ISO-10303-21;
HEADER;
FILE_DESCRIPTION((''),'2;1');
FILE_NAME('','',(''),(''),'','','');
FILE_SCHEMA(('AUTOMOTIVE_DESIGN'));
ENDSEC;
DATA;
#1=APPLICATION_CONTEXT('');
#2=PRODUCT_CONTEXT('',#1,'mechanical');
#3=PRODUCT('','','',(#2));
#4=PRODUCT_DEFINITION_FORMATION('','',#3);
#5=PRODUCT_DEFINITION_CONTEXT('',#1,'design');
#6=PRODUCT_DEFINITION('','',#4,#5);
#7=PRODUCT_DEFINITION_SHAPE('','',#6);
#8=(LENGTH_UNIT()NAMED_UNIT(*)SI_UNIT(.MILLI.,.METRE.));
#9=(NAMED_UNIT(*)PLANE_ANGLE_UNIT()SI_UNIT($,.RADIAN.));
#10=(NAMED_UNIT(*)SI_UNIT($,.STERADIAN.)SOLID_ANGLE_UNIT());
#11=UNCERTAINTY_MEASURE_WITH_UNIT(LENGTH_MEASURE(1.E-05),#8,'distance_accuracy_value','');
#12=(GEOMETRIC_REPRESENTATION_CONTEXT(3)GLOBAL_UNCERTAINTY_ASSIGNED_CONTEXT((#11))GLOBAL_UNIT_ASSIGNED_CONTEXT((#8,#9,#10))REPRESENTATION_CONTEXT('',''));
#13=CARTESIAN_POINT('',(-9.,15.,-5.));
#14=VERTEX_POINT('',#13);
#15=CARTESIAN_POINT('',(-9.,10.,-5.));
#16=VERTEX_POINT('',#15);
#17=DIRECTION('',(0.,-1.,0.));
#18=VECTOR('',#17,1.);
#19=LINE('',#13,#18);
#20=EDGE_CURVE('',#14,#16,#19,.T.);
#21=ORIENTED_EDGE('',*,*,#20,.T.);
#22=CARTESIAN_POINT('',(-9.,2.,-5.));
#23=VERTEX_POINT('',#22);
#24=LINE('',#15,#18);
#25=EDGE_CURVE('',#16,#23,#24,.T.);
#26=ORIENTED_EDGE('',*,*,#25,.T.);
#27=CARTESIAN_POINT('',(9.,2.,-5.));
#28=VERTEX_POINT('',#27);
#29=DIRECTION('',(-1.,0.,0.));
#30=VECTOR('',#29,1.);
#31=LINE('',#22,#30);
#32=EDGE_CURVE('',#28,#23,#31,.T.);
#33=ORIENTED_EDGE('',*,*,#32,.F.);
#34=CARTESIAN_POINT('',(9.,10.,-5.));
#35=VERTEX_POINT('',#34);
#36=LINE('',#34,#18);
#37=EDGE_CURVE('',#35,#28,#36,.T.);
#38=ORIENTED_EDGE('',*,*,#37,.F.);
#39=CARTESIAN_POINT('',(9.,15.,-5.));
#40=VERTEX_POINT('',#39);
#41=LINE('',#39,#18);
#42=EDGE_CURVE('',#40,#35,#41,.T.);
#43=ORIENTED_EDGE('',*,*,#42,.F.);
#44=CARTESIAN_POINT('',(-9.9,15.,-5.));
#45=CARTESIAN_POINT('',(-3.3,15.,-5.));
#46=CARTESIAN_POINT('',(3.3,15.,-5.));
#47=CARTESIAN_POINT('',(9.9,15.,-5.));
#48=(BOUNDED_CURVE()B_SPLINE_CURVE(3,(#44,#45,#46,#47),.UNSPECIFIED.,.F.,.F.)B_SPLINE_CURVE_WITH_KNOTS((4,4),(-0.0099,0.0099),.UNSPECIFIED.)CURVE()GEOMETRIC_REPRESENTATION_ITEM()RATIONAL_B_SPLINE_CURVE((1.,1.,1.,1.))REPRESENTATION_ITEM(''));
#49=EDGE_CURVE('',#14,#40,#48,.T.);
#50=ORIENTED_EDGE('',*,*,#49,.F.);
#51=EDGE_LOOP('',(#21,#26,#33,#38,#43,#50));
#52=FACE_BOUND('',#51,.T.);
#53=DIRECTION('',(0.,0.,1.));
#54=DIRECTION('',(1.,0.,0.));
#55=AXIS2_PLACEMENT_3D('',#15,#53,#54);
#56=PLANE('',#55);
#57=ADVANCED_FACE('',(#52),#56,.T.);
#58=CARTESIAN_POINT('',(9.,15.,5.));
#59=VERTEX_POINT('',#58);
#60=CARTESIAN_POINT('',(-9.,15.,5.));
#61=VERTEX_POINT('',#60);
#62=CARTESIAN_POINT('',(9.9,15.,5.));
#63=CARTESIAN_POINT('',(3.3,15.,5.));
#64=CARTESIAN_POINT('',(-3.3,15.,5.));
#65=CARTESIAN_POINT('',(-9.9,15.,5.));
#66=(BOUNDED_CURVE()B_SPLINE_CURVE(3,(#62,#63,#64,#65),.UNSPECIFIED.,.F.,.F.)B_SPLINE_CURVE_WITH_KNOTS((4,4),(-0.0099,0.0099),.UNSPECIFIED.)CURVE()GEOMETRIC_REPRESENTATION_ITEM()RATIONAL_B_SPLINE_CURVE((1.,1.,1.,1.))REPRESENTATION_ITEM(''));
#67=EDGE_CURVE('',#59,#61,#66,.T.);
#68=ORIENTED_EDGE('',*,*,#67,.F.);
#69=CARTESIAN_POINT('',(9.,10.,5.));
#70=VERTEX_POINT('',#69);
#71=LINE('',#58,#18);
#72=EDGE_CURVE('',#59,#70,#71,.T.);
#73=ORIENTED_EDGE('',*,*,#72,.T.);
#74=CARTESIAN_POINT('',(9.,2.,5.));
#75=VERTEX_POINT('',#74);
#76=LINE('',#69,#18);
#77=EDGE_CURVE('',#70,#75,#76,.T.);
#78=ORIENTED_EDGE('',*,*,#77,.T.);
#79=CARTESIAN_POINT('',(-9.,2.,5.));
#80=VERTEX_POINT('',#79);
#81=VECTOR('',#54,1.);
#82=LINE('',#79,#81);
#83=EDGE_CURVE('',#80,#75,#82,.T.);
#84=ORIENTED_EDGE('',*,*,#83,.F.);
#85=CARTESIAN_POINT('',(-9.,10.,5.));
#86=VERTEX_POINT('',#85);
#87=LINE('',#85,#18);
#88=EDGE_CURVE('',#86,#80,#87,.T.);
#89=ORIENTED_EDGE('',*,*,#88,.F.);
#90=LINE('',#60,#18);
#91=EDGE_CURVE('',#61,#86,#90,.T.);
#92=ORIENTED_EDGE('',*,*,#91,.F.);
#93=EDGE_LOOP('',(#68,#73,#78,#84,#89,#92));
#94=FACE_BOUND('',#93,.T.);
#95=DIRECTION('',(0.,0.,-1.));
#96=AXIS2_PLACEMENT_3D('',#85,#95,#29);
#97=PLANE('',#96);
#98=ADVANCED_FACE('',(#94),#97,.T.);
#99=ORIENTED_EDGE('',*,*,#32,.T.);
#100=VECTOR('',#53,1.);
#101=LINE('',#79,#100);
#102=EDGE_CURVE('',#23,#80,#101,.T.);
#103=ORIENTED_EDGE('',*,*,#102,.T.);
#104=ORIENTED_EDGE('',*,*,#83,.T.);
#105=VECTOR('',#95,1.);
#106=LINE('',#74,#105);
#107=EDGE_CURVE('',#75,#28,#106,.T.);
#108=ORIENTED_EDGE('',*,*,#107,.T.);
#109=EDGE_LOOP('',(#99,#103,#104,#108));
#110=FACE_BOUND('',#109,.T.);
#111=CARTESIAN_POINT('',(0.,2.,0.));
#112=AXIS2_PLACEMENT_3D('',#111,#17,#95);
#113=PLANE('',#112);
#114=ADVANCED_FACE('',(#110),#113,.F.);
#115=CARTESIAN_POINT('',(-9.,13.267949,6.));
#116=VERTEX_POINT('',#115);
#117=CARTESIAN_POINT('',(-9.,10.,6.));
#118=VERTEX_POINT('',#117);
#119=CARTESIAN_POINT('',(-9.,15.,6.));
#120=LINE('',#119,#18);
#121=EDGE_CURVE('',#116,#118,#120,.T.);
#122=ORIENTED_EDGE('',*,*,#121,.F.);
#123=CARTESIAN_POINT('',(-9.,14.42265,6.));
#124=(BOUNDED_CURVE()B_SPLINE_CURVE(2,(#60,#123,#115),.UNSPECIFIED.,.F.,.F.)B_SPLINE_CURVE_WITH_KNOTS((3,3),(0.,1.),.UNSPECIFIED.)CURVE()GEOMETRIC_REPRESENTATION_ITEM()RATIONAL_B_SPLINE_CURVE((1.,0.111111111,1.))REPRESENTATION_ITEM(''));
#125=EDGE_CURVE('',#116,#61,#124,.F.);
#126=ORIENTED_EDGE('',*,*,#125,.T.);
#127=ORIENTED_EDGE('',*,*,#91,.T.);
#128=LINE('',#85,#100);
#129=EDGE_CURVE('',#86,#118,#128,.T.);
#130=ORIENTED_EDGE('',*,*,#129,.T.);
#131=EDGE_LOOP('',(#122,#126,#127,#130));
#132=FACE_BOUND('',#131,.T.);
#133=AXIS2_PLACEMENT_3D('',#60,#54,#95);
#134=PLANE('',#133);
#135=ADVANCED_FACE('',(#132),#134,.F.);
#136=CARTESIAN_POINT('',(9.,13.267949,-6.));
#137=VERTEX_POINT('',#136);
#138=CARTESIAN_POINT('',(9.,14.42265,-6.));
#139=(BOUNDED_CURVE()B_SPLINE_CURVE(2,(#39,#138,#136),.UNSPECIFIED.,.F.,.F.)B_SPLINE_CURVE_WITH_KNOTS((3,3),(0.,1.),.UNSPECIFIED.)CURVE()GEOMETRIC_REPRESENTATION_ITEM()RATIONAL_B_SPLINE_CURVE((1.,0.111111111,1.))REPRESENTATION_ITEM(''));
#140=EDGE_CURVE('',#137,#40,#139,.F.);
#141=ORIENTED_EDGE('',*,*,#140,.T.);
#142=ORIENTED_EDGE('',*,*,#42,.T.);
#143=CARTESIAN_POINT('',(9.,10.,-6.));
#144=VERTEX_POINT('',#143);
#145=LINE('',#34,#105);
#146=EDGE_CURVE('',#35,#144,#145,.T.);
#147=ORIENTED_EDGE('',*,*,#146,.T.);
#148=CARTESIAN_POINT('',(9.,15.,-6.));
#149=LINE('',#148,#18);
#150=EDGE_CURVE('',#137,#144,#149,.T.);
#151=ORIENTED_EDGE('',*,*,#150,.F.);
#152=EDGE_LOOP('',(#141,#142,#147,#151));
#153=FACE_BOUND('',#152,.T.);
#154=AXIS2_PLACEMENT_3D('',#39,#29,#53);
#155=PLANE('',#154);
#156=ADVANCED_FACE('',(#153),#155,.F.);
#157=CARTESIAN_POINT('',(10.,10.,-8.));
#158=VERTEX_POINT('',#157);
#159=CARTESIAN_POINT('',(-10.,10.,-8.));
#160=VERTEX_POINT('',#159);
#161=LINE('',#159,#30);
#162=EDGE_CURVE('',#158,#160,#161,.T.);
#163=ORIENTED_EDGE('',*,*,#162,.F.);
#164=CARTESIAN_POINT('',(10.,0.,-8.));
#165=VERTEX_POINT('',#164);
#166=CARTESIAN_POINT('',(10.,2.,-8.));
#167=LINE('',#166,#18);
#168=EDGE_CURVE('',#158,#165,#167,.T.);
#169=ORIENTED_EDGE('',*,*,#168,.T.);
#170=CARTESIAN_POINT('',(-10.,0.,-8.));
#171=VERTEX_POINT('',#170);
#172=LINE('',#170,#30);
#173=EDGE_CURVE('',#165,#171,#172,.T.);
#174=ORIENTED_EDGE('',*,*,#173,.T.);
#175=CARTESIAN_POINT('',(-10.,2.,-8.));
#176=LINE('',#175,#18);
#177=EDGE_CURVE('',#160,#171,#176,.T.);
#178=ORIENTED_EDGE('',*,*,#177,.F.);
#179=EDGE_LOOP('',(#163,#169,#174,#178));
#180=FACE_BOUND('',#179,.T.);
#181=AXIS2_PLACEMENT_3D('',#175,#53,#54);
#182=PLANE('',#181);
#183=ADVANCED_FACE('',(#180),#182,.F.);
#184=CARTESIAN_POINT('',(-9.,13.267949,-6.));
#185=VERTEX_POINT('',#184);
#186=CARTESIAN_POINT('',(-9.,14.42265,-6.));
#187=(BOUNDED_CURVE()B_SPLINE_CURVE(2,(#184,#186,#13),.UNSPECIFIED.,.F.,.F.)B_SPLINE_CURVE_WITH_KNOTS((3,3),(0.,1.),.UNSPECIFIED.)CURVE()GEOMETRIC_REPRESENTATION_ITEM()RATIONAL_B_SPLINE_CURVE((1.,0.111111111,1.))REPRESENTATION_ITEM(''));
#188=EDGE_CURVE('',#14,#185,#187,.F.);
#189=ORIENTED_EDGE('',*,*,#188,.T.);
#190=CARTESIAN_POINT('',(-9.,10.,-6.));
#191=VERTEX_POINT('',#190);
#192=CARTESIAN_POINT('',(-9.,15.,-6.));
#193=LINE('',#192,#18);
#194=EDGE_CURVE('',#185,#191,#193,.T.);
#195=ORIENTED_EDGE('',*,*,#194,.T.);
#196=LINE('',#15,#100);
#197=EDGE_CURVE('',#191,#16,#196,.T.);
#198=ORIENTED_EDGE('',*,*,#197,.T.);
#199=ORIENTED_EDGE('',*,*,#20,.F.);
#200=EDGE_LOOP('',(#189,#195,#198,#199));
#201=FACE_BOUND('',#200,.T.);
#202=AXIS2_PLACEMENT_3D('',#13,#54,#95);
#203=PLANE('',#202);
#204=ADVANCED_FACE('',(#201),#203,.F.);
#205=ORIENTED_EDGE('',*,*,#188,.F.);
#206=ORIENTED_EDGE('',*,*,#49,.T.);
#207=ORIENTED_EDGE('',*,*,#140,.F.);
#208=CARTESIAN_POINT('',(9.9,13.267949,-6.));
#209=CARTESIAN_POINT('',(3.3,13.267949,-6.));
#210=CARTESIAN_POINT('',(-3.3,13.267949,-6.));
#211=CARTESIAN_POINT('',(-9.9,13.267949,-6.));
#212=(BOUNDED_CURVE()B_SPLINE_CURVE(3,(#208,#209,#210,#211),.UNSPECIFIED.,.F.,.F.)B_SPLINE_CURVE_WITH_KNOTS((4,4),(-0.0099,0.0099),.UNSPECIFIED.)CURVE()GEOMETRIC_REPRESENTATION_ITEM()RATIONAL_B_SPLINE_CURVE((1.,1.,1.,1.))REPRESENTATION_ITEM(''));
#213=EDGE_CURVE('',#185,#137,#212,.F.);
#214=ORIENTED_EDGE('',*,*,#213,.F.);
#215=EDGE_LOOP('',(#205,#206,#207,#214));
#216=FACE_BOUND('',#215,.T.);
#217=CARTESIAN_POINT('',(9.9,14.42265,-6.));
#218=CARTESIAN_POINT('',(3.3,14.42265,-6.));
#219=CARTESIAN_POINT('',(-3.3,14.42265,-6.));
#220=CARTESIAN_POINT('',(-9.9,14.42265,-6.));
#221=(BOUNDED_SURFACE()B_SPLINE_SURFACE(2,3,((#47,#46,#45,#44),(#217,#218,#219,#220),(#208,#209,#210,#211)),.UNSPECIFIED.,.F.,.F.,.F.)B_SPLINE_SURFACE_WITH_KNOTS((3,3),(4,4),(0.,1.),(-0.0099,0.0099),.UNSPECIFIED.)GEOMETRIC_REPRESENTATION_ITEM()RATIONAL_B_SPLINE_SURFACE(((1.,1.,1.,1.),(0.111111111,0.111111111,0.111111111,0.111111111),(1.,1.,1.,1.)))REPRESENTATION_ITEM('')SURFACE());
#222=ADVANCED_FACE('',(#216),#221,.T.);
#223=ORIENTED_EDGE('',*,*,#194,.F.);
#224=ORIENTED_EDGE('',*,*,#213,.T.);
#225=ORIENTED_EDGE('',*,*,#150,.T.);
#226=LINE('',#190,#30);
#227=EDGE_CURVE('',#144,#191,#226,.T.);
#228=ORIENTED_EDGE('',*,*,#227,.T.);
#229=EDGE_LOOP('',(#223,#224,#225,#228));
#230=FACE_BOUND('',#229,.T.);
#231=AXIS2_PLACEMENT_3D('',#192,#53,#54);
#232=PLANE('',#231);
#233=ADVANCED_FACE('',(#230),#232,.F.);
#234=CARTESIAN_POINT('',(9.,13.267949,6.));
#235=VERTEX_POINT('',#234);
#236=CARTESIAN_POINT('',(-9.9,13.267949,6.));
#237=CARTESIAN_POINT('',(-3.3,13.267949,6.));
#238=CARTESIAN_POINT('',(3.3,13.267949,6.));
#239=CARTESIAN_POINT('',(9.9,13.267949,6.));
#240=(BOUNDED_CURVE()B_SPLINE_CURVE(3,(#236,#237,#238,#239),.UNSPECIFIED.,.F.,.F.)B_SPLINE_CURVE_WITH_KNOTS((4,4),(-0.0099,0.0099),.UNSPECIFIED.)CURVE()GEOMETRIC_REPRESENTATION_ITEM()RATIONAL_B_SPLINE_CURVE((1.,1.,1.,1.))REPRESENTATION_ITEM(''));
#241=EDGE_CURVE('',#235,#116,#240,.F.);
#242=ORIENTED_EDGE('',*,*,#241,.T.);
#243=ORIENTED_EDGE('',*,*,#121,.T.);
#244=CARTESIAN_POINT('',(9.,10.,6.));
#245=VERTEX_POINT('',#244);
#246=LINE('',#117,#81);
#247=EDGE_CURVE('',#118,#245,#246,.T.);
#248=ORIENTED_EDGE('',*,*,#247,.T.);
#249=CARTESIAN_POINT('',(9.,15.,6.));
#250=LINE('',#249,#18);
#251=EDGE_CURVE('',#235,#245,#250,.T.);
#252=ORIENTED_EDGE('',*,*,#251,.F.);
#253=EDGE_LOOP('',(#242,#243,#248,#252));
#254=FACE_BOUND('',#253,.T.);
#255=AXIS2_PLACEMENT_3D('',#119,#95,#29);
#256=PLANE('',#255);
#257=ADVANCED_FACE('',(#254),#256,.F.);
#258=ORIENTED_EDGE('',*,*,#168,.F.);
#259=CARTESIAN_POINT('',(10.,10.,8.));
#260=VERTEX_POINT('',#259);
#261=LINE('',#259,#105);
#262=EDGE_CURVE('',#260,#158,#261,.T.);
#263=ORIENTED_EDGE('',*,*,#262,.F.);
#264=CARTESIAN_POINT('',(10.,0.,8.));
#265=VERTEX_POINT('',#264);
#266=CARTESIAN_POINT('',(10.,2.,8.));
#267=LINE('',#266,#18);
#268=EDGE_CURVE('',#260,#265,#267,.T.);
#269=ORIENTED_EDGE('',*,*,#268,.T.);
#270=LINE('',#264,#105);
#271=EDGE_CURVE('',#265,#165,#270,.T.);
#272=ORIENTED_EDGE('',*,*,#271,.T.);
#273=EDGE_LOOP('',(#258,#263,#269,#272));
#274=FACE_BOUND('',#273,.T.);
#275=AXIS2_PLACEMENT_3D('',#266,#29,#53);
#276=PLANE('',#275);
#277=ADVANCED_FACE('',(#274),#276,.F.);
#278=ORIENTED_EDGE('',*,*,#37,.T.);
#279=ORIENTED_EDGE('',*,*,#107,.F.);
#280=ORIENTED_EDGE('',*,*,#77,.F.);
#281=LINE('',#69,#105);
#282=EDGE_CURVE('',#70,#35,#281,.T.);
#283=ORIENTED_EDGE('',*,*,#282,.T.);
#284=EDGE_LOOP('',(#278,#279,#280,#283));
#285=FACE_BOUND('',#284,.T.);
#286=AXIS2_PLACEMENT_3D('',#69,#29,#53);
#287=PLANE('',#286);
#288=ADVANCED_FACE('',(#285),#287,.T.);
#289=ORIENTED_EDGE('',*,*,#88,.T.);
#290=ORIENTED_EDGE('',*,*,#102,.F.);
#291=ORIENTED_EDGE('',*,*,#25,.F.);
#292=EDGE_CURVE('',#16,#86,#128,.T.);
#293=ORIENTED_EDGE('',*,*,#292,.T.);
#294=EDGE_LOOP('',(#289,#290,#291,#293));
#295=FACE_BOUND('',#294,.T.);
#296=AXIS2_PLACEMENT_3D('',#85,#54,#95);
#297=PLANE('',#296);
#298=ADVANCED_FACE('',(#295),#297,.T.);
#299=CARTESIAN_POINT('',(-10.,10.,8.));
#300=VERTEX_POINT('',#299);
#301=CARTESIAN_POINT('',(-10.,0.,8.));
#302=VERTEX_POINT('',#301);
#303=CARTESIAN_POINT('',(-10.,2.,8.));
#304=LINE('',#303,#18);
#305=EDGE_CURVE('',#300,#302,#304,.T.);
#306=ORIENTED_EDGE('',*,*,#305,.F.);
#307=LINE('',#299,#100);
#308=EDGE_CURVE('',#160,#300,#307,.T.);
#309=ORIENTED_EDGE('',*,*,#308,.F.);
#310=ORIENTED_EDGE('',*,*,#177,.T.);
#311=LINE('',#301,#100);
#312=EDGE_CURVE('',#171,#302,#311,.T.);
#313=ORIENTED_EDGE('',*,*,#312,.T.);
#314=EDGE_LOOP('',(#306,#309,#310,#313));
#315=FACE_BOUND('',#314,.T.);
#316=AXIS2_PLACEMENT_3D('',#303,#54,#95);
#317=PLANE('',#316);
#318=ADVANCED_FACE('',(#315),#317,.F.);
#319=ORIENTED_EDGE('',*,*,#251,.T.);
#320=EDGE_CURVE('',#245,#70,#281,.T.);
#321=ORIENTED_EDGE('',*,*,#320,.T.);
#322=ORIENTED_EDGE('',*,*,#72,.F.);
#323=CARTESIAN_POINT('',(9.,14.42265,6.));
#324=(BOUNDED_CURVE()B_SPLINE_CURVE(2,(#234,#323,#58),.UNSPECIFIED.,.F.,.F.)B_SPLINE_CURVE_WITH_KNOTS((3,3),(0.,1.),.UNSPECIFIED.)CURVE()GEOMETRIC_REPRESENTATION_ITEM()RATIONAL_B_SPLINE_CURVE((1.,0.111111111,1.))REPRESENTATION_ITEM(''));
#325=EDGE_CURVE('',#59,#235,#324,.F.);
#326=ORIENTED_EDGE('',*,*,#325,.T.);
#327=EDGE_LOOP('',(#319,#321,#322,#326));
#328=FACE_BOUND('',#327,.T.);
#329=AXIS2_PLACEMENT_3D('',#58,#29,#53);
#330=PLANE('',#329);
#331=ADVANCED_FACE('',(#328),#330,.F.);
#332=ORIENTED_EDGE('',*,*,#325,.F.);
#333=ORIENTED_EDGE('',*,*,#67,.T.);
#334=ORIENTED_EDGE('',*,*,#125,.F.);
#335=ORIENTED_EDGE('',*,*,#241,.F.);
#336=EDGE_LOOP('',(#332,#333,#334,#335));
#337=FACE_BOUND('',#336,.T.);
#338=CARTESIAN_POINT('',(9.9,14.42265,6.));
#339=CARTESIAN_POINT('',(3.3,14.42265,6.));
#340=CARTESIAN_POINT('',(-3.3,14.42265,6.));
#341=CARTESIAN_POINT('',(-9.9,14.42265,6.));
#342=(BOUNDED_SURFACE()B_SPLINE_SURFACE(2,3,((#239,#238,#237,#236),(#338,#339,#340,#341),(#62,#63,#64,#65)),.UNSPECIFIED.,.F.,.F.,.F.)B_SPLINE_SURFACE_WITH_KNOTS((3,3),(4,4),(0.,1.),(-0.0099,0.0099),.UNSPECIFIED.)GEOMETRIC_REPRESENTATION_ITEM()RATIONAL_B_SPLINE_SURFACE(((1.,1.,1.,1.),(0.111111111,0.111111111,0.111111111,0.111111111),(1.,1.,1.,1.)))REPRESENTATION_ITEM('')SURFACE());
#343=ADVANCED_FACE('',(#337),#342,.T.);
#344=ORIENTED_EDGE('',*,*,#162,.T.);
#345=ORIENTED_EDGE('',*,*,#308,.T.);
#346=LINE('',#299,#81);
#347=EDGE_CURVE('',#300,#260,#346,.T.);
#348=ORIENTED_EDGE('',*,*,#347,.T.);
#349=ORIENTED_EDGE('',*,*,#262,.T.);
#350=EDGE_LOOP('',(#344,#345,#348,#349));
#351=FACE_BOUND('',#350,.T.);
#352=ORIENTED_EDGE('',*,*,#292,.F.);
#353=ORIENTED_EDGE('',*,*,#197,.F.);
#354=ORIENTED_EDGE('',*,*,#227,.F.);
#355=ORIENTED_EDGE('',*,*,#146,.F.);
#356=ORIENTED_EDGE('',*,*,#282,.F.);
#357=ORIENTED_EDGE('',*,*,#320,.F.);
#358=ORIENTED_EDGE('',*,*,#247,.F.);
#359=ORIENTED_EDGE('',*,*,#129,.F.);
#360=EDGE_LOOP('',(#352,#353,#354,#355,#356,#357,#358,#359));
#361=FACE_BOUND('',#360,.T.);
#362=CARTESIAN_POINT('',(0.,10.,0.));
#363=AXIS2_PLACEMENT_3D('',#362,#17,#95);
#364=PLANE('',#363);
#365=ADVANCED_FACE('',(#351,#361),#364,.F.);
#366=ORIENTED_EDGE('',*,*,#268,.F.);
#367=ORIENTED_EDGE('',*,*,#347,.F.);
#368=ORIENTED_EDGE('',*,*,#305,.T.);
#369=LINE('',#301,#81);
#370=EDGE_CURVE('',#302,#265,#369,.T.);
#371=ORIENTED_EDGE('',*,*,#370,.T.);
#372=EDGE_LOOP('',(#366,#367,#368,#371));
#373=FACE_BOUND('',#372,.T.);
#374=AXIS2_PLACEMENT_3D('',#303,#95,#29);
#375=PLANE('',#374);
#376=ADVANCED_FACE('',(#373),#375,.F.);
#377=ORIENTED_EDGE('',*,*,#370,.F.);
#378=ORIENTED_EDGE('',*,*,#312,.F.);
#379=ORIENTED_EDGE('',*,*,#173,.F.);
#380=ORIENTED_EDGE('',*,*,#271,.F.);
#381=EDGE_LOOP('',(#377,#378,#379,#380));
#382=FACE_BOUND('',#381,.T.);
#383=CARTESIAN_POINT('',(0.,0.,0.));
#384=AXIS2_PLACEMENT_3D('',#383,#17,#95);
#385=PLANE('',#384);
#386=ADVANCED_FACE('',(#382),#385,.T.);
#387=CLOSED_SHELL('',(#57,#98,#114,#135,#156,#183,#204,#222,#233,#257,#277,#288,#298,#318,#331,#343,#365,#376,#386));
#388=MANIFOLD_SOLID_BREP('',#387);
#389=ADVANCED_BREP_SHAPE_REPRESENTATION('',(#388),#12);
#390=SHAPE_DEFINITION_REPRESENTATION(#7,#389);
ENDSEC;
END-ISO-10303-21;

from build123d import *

# Parameters (mm, degrees)
CROQUIS1_W              = 20
CROQUIS1_H              = 16
SALIENTE_EXTRUIR1_DEPTH = 2
CROQUIS2_W              = 20
CROQUIS2_H              = 16
CROQUIS2_W_2            = 18
CROQUIS2_H_2            = 10
SALIENTE_EXTRUIR2_DEPTH = 8
CROQUIS3_W              = 18
CROQUIS3_H              = 1
SALIENTE_EXTRUIR3_DEPTH = 5
REDONDEO1_START         = -9
REDONDEO1_DEPTH         = 18


with BuildPart() as part:
    # Croquis1 → Saliente-Extruir1 (new body)
    with BuildSketch(Plane(origin=(0, 0, 0), x_dir=(1, 0, 0), z_dir=(0, 1, 0))):
        Rectangle(CROQUIS1_W, CROQUIS1_H)
    extrude(amount=SALIENTE_EXTRUIR1_DEPTH)

    # Croquis2 → Saliente-Extruir2 (add)
    with BuildSketch(Plane(origin=(0, 2, 0), x_dir=(1, 0, 0), z_dir=(0, 1, 0))):
        Rectangle(CROQUIS2_W, CROQUIS2_H)
        Rectangle(CROQUIS2_W_2, CROQUIS2_H_2, mode=Mode.SUBTRACT)
    extrude(amount=SALIENTE_EXTRUIR2_DEPTH)

    # Croquis3 → Saliente-Extruir3 (add)
    with BuildSketch(Plane(origin=(0, 10, 0), x_dir=(1, 0, 0), z_dir=(0, 1, 0))):
        with Locations((0, -5.5)):
            Rectangle(CROQUIS3_W, CROQUIS3_H)
        with Locations((0, 5.5)):
            Rectangle(CROQUIS3_W, CROQUIS3_H)
    extrude(amount=SALIENTE_EXTRUIR3_DEPTH)

    # Redondeo1: read off the stored shape, not the designer's step
    # Redondeo1 outline → Redondeo1 (cut)
    with BuildSketch(Plane.YZ.offset(REDONDEO1_START)):
        with BuildLine():
            Line((15, 6), (13.267949192, 6))
            add(Edge.make_bspline(
                [(13.267949192, 6), (14.422649731, 6), (15, 5)],
                knots=[0, 0, 0, 1, 1, 1], degree=2, weights=[1, 0.111111111, 1]))
            Line((15, 5), (15, 6))
        make_face()
        with BuildLine():
            Line((15, -6), (15, -5))
            add(Edge.make_bspline(
                [(15, -5), (14.422649731, -6), (13.267949192, -6)],
                knots=[0, 0, 0, 1, 1, 1], degree=2, weights=[1, 0.111111111, 1]))
            Line((13.267949192, -6), (15, -6))
        make_face()
    extrude(amount=REDONDEO1_DEPTH, mode=Mode.SUBTRACT)


solid = part.part
